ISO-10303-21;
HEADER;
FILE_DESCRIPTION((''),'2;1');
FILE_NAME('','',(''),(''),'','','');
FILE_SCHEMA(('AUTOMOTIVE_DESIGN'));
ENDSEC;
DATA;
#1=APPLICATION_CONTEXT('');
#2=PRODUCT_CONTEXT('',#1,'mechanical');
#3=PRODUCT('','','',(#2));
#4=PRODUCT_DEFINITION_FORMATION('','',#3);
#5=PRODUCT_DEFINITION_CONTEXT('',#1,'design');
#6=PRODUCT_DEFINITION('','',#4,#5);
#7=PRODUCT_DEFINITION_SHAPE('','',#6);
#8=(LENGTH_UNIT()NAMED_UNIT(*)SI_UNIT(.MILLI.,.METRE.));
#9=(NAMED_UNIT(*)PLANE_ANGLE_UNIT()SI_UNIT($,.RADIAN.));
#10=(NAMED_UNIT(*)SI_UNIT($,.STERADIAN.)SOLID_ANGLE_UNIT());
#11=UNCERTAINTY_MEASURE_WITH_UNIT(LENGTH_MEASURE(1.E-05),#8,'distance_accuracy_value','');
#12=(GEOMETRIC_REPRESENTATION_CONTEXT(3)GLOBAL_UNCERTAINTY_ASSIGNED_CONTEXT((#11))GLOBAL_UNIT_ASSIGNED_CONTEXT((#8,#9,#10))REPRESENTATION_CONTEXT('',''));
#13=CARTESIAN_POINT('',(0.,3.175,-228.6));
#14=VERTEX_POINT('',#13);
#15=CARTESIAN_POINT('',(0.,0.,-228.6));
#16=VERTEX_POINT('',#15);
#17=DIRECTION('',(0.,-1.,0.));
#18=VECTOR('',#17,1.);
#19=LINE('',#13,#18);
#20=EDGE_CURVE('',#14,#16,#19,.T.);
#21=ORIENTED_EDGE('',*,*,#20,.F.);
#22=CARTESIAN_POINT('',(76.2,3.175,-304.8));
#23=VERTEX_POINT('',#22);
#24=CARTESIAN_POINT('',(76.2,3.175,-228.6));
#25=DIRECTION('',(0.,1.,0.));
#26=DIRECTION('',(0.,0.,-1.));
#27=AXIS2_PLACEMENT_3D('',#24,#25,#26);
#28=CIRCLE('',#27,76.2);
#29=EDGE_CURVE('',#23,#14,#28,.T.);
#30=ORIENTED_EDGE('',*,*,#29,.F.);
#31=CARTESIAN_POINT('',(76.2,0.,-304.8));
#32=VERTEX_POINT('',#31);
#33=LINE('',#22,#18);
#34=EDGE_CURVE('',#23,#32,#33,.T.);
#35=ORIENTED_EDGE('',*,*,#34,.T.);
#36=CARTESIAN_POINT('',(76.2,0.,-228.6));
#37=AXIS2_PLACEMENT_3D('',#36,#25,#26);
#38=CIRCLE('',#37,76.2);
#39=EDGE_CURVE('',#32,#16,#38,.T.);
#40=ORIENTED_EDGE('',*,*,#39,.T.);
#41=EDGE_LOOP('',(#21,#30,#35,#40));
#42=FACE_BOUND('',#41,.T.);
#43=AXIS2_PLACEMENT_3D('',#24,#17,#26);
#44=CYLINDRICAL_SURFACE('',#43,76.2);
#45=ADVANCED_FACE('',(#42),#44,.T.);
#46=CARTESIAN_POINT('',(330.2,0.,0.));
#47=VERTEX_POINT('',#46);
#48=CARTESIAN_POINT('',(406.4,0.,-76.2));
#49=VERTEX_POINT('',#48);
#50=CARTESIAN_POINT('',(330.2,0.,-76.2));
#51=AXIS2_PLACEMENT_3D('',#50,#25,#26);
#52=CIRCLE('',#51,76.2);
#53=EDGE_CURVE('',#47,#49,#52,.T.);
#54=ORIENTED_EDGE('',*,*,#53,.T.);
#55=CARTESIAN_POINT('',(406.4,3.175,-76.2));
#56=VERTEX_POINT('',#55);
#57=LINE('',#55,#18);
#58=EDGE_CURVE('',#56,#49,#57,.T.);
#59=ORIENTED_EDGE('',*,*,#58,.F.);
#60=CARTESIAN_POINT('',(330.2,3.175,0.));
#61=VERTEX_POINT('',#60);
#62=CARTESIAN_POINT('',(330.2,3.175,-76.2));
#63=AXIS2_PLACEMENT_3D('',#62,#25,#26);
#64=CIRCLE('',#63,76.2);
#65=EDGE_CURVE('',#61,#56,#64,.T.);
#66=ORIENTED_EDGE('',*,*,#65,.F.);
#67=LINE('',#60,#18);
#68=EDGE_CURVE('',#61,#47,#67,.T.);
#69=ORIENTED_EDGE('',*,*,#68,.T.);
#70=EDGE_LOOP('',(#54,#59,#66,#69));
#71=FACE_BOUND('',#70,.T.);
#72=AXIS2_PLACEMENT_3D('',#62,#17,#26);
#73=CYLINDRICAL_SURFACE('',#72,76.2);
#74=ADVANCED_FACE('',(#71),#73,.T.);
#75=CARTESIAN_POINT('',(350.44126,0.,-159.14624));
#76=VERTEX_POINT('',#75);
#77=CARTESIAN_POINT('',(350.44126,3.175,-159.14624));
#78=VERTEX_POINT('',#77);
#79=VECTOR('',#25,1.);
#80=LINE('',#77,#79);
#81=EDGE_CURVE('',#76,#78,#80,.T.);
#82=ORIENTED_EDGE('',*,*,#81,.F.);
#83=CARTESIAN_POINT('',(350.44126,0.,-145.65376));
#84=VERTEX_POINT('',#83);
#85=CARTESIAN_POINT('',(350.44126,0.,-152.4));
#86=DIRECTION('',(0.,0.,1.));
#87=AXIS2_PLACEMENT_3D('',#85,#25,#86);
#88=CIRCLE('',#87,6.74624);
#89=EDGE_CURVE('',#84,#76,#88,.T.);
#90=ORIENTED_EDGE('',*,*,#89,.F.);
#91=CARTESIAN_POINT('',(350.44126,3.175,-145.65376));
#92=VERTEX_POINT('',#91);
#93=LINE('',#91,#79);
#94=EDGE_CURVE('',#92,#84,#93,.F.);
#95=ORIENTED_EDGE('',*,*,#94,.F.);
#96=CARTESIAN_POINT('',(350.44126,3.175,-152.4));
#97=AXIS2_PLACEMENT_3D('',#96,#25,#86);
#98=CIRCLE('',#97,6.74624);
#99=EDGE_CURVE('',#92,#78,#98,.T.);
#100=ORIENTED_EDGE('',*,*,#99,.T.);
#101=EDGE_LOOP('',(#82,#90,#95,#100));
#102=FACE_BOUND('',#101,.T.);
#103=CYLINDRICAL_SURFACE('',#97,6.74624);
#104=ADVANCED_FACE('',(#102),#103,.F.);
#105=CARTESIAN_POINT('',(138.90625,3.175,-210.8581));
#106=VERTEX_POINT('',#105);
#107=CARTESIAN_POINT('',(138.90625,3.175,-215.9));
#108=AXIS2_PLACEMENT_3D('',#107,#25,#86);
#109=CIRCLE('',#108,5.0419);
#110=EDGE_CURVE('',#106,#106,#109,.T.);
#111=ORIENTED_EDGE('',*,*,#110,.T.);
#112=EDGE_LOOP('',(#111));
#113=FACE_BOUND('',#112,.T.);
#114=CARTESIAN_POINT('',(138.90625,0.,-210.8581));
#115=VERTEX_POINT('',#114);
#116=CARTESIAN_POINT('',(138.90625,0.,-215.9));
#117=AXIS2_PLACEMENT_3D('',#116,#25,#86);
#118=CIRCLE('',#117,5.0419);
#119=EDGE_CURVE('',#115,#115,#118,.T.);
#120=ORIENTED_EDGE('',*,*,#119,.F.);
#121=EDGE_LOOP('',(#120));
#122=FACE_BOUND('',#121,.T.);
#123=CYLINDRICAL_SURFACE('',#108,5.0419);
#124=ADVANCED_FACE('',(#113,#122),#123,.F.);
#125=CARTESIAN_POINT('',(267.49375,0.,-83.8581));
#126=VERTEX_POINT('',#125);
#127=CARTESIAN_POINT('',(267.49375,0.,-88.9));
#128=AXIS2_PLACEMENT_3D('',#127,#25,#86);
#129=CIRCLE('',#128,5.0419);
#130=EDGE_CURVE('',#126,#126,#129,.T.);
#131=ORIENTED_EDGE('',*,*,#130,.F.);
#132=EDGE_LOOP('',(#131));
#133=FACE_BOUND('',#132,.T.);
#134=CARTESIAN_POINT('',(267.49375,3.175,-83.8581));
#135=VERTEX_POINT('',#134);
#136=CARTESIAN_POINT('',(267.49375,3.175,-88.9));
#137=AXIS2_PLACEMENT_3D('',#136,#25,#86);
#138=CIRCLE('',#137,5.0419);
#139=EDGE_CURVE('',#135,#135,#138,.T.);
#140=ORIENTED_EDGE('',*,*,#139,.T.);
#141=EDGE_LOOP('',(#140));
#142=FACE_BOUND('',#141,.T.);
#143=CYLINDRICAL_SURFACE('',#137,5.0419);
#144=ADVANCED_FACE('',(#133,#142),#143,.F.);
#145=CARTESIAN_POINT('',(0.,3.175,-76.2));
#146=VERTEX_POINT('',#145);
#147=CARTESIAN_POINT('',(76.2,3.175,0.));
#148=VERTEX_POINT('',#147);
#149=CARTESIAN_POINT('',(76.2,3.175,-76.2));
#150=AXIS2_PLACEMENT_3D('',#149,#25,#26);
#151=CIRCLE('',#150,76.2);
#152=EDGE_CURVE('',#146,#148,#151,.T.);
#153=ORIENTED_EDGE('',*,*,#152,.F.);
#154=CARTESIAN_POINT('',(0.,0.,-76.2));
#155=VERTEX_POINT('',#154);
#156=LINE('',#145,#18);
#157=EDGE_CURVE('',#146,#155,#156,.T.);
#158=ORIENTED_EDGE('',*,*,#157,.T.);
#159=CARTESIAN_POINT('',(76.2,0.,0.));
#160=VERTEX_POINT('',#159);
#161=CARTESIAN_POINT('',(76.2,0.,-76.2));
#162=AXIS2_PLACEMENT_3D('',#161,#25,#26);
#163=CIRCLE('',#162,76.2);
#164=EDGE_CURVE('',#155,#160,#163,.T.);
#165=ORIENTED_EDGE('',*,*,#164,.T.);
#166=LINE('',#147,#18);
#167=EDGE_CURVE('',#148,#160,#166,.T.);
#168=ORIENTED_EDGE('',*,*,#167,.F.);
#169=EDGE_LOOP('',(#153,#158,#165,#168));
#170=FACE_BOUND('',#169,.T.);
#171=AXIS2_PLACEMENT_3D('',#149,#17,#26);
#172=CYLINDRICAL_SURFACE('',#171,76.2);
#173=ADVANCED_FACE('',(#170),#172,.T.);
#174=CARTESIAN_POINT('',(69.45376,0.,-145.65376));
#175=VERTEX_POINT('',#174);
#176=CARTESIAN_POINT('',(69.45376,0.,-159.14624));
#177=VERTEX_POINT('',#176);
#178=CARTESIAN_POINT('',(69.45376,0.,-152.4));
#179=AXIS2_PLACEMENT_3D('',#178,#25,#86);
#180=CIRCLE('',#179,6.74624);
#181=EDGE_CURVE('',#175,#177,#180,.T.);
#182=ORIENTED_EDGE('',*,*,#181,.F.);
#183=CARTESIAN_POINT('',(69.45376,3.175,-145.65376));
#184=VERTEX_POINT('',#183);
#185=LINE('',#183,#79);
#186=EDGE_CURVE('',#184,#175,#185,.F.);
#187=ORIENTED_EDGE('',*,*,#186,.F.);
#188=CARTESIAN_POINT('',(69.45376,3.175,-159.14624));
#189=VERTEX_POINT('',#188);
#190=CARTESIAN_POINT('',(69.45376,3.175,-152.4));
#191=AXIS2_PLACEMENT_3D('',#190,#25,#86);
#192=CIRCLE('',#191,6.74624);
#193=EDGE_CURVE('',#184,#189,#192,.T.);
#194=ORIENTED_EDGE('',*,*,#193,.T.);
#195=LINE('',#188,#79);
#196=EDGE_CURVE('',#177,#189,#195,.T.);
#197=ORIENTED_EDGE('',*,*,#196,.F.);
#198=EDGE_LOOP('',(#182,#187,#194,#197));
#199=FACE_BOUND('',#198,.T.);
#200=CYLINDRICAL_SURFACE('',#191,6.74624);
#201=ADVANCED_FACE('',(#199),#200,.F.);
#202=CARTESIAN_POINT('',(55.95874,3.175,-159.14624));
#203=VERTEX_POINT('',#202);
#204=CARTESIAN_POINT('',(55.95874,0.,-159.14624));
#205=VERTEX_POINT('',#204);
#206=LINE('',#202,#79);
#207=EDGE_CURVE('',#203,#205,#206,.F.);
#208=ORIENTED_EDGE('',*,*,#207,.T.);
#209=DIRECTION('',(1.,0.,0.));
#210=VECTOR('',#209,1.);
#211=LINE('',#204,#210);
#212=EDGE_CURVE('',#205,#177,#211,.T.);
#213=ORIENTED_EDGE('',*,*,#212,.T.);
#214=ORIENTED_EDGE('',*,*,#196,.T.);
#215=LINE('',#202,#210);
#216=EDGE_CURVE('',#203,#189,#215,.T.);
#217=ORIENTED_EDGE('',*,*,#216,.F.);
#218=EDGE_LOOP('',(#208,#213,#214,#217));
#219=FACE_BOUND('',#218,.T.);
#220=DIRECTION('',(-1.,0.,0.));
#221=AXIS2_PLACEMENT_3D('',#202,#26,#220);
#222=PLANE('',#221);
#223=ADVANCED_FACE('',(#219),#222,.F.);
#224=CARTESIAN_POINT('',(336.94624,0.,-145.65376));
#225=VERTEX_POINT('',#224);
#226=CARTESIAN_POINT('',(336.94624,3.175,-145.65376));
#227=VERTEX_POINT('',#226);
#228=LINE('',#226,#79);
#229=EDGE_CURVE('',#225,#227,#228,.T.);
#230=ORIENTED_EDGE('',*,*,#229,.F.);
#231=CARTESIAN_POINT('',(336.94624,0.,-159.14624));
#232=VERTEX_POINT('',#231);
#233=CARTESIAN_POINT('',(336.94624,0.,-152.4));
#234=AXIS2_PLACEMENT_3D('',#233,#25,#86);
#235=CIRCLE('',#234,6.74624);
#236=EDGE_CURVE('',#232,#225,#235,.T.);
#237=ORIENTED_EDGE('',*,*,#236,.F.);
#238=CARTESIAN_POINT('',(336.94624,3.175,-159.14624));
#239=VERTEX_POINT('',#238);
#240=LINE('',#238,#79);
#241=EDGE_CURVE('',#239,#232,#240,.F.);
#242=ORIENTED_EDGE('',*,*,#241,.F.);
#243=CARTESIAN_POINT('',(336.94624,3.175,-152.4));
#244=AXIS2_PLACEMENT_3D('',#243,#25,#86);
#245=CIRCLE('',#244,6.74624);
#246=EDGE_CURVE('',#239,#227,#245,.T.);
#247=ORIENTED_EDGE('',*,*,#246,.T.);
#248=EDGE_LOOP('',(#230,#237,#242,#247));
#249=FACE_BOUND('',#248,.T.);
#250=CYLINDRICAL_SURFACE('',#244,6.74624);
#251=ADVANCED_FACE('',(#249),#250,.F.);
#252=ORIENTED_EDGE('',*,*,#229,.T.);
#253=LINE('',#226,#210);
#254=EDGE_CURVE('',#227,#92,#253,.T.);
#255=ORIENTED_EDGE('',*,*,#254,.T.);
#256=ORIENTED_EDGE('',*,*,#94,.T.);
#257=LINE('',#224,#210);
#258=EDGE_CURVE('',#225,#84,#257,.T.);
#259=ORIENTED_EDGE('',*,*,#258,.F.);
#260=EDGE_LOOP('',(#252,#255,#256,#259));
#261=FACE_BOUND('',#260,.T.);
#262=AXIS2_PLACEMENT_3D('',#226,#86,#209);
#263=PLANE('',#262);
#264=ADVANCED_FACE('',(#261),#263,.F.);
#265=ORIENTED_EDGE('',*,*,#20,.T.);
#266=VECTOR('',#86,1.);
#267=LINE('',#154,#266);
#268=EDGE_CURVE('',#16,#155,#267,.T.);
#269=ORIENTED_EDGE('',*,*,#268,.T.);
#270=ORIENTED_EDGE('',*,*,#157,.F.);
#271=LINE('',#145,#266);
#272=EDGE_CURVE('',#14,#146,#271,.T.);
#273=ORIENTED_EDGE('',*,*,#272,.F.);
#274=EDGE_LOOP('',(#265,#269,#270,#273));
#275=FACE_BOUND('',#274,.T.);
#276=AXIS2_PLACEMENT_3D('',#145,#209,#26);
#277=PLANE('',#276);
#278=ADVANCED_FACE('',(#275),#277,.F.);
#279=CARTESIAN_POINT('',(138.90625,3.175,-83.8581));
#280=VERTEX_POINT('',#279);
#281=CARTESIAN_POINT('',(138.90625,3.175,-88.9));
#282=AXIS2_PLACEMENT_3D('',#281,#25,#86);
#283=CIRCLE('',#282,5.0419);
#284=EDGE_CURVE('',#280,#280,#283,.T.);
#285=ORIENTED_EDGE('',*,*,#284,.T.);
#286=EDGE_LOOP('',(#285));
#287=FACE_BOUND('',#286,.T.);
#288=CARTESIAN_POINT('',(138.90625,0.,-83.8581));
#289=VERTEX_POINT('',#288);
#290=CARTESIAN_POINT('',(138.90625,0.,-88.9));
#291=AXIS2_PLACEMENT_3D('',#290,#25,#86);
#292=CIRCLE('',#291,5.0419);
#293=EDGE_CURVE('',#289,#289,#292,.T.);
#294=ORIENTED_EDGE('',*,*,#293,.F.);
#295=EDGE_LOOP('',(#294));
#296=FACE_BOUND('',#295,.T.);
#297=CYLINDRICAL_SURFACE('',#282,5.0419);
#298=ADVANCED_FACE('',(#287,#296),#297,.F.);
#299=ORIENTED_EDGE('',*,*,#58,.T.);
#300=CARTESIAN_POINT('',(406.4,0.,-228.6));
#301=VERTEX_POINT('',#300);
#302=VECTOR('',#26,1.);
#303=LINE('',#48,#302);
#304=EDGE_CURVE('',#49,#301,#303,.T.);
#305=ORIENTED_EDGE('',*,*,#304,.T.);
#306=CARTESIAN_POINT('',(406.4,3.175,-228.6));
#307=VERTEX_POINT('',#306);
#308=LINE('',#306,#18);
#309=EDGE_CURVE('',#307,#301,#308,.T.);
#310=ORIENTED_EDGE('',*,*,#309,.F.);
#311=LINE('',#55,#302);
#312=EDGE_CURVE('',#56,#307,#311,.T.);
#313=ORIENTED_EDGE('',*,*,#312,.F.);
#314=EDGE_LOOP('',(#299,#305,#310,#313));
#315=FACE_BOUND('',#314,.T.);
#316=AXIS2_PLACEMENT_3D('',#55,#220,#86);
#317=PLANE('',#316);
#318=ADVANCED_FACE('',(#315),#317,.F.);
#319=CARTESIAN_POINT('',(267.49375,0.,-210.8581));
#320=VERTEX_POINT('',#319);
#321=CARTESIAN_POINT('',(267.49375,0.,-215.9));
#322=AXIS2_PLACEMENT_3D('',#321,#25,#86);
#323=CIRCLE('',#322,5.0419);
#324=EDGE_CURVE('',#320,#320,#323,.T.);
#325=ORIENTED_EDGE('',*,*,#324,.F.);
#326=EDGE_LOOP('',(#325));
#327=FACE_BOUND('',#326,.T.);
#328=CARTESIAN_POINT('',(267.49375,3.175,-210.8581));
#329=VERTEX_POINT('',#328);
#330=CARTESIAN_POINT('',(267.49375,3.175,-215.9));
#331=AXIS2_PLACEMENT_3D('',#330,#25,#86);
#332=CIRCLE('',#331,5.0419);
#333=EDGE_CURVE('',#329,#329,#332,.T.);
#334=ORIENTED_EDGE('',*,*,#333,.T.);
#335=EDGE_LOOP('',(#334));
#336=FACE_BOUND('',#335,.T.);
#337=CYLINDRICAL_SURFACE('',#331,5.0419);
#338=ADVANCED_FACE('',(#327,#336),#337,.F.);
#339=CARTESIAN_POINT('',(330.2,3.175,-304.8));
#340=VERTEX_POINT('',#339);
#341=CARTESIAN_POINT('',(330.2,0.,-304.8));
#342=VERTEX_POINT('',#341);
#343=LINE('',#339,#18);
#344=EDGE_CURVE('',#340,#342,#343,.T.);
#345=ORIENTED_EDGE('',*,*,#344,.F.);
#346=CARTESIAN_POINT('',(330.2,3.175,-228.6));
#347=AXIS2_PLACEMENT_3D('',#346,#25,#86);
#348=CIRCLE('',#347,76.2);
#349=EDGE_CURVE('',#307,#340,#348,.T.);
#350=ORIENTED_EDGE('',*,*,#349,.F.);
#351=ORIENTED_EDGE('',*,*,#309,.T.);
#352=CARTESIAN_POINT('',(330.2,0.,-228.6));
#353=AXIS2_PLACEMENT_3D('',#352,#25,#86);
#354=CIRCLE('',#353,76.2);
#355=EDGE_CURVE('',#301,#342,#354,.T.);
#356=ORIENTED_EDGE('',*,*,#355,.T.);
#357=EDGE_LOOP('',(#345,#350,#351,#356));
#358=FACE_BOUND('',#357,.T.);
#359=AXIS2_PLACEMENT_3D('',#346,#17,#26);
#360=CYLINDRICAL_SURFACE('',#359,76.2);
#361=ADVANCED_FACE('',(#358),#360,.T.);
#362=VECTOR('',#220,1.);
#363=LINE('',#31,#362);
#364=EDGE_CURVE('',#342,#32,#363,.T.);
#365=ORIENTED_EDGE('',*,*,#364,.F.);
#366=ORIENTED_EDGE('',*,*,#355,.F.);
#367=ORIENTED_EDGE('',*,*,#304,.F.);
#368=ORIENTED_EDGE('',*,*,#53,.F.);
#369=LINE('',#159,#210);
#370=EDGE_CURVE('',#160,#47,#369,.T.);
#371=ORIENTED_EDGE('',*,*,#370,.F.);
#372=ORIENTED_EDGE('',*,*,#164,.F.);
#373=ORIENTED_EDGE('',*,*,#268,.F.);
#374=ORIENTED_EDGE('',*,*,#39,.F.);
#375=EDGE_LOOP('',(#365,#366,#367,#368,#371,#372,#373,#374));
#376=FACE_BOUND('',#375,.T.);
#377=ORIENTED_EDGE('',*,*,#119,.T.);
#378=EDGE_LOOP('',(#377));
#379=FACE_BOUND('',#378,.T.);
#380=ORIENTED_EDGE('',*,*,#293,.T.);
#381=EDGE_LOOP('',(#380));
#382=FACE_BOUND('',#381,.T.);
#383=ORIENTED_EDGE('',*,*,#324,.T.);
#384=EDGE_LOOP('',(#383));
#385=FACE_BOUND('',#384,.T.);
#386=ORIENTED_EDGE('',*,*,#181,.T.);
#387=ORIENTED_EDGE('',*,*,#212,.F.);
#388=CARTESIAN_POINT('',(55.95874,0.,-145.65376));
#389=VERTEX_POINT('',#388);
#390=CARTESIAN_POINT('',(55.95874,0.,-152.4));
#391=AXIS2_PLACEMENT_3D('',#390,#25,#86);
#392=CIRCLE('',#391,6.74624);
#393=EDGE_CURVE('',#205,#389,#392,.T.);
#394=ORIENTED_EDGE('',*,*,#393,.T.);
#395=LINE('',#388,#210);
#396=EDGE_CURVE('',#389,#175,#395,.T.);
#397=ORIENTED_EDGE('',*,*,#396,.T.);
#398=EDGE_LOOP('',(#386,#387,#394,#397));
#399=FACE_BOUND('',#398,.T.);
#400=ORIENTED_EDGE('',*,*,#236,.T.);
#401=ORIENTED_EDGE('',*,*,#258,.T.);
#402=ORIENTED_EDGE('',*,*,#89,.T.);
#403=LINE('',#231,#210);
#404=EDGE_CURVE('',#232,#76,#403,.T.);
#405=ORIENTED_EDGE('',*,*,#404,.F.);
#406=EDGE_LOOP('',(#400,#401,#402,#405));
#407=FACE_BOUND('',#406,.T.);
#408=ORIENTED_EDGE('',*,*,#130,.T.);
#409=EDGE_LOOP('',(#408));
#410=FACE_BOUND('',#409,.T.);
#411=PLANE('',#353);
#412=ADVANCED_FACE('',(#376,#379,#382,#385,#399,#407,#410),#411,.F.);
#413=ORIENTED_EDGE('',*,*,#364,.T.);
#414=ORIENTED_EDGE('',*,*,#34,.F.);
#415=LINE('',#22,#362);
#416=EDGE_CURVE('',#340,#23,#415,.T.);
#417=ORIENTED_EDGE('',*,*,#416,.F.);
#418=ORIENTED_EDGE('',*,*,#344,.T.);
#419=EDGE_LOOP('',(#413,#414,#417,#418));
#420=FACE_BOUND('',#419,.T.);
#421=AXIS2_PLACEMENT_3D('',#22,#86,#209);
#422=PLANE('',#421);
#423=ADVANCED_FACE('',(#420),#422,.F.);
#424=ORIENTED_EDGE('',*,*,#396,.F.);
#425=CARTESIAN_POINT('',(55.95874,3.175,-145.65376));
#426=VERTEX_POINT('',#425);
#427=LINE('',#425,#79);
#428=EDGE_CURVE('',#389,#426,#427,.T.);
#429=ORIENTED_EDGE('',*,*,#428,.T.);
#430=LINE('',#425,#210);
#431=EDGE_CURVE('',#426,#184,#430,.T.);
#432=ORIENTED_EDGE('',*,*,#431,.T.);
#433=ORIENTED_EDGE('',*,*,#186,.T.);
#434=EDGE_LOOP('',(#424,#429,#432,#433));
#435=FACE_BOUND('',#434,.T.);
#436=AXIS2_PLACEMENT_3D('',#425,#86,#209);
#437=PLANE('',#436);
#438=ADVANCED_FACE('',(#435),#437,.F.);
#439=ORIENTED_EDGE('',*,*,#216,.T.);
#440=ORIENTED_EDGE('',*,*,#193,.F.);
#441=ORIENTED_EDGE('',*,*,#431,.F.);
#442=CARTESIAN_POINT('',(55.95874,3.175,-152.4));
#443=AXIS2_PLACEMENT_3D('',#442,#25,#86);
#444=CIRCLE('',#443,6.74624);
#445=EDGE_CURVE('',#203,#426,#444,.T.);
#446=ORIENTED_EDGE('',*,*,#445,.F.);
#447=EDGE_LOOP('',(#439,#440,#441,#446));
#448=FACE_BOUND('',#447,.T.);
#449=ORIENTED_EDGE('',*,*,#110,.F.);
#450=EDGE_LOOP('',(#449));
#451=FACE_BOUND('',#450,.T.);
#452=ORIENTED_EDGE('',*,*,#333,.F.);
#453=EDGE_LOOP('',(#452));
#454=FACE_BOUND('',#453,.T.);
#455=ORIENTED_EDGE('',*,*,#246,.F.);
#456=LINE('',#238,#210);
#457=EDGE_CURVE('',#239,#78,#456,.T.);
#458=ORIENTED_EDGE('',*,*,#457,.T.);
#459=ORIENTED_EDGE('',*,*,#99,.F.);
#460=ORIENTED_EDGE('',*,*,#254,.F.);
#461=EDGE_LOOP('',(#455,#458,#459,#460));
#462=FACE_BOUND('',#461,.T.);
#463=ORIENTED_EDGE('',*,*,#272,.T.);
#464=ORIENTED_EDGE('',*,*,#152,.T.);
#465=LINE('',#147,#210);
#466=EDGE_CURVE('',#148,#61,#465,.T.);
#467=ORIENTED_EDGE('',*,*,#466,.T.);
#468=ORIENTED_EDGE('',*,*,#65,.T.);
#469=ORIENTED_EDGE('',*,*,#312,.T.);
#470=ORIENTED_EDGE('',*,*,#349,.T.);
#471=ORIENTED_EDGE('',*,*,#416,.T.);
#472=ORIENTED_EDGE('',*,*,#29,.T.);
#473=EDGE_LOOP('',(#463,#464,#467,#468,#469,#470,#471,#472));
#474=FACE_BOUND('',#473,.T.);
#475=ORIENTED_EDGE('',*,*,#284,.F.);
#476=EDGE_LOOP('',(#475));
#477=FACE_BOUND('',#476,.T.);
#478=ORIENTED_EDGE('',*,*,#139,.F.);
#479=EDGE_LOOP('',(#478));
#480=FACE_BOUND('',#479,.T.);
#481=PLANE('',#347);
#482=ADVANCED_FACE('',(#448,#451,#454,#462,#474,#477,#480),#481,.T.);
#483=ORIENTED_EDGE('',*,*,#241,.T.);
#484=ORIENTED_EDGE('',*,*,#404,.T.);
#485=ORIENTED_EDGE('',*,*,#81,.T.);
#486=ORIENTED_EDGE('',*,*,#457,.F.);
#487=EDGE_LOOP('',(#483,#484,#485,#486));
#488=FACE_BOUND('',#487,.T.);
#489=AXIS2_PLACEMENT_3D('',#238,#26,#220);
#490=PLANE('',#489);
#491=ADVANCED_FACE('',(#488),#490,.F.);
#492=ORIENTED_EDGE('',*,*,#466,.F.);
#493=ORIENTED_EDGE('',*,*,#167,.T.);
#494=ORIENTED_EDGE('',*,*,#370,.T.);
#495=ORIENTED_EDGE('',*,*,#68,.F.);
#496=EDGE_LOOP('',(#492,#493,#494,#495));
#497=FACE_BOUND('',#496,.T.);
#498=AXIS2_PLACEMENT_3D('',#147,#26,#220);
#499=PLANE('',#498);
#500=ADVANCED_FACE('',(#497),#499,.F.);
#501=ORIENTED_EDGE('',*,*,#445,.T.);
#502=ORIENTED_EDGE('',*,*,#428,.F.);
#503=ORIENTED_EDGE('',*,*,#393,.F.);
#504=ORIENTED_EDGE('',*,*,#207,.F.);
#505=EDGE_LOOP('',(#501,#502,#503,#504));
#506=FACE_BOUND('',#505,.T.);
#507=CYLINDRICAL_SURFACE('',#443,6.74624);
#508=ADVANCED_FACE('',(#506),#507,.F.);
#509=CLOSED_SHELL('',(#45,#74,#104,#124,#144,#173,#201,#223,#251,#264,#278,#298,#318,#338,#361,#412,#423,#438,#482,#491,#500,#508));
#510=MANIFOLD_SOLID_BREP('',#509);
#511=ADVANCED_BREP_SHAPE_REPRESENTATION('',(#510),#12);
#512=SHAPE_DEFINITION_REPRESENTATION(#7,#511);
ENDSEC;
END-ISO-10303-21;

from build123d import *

# Parameters (mm, degrees)
BOSS_EXTRUDE1_DEPTH         = 3.175
F_1_2_CLEARANCE_SLOT1_DEPTH = 3.175
F_3_8_CLEARANCE_HOLE1_D     = 10.0838


# Read off the part's stored shape, not the designer's step: 1/2 Clearance Slot1
with BuildPart() as part:
    # Sketch1 → Boss-Extrude1 (new body)
    with BuildSketch(Plane(origin=(0, 0, 0), x_dir=(1, 0, 0), z_dir=(0, 1, 0))):
        with BuildLine():
            Line((76.2, 0), (330.2, 0))
            ThreePointArc((330.2, 0), (384.081536726, 22.318463274), (406.4, 76.2))
            Line((406.4, 76.2), (406.4, 228.6))
            ThreePointArc((406.4, 228.6), (384.081536726, 282.481536726), (330.2, 304.8))
            Line((330.2, 304.8), (76.2, 304.8))
            ThreePointArc((76.2, 304.8), (22.318463274, 282.481536726), (0, 228.6))
            Line((0, 228.6), (0, 76.2))
            ThreePointArc((0, 76.2), (22.318463274, 22.318463274), (76.2, 0))
        make_face()
    extrude(amount=BOSS_EXTRUDE1_DEPTH)

    # 1/2 Clearance Slot1 outline → 1/2 Clearance Slot1 (cut)
    with BuildSketch(Plane(origin=(0, 0, 0), x_dir=(1, 0, 0), z_dir=(0, 1, 0))):
        with BuildLine():
            Line((336.94624, 145.65376), (350.44126, 145.65376))
            ThreePointArc((350.44126, 145.65376), (357.1875, 152.4), (350.44126, 159.14624))
            Line((350.44126, 159.14624), (336.94624, 159.14624))
            ThreePointArc((336.94624, 159.14624), (330.2, 152.4), (336.94624, 145.65376))
        make_face()
        with BuildLine():
            ThreePointArc((69.45376, 145.65376), (76.2, 152.4), (69.45376, 159.14624))
            Line((69.45376, 159.14624), (55.95874, 159.14624))
            ThreePointArc((55.95874, 159.14624), (49.2125, 152.4), (55.95874, 145.65376))
            Line((55.95874, 145.65376), (69.45376, 145.65376))
        make_face()
    extrude(amount=F_1_2_CLEARANCE_SLOT1_DEPTH, mode=Mode.SUBTRACT)

    # 3/8 Clearance Hole1 (through all)
    with Locations(Plane(origin=(0, 3.175, 0), x_dir=(1, 0, 0), z_dir=(0, 1, 0))):
        with Locations((138.90625, 88.9), (267.49375, 215.9), (267.49375, 88.9), (138.90625, 215.9)):
            Hole(F_3_8_CLEARANCE_HOLE1_D / 2)


solid = part.part
